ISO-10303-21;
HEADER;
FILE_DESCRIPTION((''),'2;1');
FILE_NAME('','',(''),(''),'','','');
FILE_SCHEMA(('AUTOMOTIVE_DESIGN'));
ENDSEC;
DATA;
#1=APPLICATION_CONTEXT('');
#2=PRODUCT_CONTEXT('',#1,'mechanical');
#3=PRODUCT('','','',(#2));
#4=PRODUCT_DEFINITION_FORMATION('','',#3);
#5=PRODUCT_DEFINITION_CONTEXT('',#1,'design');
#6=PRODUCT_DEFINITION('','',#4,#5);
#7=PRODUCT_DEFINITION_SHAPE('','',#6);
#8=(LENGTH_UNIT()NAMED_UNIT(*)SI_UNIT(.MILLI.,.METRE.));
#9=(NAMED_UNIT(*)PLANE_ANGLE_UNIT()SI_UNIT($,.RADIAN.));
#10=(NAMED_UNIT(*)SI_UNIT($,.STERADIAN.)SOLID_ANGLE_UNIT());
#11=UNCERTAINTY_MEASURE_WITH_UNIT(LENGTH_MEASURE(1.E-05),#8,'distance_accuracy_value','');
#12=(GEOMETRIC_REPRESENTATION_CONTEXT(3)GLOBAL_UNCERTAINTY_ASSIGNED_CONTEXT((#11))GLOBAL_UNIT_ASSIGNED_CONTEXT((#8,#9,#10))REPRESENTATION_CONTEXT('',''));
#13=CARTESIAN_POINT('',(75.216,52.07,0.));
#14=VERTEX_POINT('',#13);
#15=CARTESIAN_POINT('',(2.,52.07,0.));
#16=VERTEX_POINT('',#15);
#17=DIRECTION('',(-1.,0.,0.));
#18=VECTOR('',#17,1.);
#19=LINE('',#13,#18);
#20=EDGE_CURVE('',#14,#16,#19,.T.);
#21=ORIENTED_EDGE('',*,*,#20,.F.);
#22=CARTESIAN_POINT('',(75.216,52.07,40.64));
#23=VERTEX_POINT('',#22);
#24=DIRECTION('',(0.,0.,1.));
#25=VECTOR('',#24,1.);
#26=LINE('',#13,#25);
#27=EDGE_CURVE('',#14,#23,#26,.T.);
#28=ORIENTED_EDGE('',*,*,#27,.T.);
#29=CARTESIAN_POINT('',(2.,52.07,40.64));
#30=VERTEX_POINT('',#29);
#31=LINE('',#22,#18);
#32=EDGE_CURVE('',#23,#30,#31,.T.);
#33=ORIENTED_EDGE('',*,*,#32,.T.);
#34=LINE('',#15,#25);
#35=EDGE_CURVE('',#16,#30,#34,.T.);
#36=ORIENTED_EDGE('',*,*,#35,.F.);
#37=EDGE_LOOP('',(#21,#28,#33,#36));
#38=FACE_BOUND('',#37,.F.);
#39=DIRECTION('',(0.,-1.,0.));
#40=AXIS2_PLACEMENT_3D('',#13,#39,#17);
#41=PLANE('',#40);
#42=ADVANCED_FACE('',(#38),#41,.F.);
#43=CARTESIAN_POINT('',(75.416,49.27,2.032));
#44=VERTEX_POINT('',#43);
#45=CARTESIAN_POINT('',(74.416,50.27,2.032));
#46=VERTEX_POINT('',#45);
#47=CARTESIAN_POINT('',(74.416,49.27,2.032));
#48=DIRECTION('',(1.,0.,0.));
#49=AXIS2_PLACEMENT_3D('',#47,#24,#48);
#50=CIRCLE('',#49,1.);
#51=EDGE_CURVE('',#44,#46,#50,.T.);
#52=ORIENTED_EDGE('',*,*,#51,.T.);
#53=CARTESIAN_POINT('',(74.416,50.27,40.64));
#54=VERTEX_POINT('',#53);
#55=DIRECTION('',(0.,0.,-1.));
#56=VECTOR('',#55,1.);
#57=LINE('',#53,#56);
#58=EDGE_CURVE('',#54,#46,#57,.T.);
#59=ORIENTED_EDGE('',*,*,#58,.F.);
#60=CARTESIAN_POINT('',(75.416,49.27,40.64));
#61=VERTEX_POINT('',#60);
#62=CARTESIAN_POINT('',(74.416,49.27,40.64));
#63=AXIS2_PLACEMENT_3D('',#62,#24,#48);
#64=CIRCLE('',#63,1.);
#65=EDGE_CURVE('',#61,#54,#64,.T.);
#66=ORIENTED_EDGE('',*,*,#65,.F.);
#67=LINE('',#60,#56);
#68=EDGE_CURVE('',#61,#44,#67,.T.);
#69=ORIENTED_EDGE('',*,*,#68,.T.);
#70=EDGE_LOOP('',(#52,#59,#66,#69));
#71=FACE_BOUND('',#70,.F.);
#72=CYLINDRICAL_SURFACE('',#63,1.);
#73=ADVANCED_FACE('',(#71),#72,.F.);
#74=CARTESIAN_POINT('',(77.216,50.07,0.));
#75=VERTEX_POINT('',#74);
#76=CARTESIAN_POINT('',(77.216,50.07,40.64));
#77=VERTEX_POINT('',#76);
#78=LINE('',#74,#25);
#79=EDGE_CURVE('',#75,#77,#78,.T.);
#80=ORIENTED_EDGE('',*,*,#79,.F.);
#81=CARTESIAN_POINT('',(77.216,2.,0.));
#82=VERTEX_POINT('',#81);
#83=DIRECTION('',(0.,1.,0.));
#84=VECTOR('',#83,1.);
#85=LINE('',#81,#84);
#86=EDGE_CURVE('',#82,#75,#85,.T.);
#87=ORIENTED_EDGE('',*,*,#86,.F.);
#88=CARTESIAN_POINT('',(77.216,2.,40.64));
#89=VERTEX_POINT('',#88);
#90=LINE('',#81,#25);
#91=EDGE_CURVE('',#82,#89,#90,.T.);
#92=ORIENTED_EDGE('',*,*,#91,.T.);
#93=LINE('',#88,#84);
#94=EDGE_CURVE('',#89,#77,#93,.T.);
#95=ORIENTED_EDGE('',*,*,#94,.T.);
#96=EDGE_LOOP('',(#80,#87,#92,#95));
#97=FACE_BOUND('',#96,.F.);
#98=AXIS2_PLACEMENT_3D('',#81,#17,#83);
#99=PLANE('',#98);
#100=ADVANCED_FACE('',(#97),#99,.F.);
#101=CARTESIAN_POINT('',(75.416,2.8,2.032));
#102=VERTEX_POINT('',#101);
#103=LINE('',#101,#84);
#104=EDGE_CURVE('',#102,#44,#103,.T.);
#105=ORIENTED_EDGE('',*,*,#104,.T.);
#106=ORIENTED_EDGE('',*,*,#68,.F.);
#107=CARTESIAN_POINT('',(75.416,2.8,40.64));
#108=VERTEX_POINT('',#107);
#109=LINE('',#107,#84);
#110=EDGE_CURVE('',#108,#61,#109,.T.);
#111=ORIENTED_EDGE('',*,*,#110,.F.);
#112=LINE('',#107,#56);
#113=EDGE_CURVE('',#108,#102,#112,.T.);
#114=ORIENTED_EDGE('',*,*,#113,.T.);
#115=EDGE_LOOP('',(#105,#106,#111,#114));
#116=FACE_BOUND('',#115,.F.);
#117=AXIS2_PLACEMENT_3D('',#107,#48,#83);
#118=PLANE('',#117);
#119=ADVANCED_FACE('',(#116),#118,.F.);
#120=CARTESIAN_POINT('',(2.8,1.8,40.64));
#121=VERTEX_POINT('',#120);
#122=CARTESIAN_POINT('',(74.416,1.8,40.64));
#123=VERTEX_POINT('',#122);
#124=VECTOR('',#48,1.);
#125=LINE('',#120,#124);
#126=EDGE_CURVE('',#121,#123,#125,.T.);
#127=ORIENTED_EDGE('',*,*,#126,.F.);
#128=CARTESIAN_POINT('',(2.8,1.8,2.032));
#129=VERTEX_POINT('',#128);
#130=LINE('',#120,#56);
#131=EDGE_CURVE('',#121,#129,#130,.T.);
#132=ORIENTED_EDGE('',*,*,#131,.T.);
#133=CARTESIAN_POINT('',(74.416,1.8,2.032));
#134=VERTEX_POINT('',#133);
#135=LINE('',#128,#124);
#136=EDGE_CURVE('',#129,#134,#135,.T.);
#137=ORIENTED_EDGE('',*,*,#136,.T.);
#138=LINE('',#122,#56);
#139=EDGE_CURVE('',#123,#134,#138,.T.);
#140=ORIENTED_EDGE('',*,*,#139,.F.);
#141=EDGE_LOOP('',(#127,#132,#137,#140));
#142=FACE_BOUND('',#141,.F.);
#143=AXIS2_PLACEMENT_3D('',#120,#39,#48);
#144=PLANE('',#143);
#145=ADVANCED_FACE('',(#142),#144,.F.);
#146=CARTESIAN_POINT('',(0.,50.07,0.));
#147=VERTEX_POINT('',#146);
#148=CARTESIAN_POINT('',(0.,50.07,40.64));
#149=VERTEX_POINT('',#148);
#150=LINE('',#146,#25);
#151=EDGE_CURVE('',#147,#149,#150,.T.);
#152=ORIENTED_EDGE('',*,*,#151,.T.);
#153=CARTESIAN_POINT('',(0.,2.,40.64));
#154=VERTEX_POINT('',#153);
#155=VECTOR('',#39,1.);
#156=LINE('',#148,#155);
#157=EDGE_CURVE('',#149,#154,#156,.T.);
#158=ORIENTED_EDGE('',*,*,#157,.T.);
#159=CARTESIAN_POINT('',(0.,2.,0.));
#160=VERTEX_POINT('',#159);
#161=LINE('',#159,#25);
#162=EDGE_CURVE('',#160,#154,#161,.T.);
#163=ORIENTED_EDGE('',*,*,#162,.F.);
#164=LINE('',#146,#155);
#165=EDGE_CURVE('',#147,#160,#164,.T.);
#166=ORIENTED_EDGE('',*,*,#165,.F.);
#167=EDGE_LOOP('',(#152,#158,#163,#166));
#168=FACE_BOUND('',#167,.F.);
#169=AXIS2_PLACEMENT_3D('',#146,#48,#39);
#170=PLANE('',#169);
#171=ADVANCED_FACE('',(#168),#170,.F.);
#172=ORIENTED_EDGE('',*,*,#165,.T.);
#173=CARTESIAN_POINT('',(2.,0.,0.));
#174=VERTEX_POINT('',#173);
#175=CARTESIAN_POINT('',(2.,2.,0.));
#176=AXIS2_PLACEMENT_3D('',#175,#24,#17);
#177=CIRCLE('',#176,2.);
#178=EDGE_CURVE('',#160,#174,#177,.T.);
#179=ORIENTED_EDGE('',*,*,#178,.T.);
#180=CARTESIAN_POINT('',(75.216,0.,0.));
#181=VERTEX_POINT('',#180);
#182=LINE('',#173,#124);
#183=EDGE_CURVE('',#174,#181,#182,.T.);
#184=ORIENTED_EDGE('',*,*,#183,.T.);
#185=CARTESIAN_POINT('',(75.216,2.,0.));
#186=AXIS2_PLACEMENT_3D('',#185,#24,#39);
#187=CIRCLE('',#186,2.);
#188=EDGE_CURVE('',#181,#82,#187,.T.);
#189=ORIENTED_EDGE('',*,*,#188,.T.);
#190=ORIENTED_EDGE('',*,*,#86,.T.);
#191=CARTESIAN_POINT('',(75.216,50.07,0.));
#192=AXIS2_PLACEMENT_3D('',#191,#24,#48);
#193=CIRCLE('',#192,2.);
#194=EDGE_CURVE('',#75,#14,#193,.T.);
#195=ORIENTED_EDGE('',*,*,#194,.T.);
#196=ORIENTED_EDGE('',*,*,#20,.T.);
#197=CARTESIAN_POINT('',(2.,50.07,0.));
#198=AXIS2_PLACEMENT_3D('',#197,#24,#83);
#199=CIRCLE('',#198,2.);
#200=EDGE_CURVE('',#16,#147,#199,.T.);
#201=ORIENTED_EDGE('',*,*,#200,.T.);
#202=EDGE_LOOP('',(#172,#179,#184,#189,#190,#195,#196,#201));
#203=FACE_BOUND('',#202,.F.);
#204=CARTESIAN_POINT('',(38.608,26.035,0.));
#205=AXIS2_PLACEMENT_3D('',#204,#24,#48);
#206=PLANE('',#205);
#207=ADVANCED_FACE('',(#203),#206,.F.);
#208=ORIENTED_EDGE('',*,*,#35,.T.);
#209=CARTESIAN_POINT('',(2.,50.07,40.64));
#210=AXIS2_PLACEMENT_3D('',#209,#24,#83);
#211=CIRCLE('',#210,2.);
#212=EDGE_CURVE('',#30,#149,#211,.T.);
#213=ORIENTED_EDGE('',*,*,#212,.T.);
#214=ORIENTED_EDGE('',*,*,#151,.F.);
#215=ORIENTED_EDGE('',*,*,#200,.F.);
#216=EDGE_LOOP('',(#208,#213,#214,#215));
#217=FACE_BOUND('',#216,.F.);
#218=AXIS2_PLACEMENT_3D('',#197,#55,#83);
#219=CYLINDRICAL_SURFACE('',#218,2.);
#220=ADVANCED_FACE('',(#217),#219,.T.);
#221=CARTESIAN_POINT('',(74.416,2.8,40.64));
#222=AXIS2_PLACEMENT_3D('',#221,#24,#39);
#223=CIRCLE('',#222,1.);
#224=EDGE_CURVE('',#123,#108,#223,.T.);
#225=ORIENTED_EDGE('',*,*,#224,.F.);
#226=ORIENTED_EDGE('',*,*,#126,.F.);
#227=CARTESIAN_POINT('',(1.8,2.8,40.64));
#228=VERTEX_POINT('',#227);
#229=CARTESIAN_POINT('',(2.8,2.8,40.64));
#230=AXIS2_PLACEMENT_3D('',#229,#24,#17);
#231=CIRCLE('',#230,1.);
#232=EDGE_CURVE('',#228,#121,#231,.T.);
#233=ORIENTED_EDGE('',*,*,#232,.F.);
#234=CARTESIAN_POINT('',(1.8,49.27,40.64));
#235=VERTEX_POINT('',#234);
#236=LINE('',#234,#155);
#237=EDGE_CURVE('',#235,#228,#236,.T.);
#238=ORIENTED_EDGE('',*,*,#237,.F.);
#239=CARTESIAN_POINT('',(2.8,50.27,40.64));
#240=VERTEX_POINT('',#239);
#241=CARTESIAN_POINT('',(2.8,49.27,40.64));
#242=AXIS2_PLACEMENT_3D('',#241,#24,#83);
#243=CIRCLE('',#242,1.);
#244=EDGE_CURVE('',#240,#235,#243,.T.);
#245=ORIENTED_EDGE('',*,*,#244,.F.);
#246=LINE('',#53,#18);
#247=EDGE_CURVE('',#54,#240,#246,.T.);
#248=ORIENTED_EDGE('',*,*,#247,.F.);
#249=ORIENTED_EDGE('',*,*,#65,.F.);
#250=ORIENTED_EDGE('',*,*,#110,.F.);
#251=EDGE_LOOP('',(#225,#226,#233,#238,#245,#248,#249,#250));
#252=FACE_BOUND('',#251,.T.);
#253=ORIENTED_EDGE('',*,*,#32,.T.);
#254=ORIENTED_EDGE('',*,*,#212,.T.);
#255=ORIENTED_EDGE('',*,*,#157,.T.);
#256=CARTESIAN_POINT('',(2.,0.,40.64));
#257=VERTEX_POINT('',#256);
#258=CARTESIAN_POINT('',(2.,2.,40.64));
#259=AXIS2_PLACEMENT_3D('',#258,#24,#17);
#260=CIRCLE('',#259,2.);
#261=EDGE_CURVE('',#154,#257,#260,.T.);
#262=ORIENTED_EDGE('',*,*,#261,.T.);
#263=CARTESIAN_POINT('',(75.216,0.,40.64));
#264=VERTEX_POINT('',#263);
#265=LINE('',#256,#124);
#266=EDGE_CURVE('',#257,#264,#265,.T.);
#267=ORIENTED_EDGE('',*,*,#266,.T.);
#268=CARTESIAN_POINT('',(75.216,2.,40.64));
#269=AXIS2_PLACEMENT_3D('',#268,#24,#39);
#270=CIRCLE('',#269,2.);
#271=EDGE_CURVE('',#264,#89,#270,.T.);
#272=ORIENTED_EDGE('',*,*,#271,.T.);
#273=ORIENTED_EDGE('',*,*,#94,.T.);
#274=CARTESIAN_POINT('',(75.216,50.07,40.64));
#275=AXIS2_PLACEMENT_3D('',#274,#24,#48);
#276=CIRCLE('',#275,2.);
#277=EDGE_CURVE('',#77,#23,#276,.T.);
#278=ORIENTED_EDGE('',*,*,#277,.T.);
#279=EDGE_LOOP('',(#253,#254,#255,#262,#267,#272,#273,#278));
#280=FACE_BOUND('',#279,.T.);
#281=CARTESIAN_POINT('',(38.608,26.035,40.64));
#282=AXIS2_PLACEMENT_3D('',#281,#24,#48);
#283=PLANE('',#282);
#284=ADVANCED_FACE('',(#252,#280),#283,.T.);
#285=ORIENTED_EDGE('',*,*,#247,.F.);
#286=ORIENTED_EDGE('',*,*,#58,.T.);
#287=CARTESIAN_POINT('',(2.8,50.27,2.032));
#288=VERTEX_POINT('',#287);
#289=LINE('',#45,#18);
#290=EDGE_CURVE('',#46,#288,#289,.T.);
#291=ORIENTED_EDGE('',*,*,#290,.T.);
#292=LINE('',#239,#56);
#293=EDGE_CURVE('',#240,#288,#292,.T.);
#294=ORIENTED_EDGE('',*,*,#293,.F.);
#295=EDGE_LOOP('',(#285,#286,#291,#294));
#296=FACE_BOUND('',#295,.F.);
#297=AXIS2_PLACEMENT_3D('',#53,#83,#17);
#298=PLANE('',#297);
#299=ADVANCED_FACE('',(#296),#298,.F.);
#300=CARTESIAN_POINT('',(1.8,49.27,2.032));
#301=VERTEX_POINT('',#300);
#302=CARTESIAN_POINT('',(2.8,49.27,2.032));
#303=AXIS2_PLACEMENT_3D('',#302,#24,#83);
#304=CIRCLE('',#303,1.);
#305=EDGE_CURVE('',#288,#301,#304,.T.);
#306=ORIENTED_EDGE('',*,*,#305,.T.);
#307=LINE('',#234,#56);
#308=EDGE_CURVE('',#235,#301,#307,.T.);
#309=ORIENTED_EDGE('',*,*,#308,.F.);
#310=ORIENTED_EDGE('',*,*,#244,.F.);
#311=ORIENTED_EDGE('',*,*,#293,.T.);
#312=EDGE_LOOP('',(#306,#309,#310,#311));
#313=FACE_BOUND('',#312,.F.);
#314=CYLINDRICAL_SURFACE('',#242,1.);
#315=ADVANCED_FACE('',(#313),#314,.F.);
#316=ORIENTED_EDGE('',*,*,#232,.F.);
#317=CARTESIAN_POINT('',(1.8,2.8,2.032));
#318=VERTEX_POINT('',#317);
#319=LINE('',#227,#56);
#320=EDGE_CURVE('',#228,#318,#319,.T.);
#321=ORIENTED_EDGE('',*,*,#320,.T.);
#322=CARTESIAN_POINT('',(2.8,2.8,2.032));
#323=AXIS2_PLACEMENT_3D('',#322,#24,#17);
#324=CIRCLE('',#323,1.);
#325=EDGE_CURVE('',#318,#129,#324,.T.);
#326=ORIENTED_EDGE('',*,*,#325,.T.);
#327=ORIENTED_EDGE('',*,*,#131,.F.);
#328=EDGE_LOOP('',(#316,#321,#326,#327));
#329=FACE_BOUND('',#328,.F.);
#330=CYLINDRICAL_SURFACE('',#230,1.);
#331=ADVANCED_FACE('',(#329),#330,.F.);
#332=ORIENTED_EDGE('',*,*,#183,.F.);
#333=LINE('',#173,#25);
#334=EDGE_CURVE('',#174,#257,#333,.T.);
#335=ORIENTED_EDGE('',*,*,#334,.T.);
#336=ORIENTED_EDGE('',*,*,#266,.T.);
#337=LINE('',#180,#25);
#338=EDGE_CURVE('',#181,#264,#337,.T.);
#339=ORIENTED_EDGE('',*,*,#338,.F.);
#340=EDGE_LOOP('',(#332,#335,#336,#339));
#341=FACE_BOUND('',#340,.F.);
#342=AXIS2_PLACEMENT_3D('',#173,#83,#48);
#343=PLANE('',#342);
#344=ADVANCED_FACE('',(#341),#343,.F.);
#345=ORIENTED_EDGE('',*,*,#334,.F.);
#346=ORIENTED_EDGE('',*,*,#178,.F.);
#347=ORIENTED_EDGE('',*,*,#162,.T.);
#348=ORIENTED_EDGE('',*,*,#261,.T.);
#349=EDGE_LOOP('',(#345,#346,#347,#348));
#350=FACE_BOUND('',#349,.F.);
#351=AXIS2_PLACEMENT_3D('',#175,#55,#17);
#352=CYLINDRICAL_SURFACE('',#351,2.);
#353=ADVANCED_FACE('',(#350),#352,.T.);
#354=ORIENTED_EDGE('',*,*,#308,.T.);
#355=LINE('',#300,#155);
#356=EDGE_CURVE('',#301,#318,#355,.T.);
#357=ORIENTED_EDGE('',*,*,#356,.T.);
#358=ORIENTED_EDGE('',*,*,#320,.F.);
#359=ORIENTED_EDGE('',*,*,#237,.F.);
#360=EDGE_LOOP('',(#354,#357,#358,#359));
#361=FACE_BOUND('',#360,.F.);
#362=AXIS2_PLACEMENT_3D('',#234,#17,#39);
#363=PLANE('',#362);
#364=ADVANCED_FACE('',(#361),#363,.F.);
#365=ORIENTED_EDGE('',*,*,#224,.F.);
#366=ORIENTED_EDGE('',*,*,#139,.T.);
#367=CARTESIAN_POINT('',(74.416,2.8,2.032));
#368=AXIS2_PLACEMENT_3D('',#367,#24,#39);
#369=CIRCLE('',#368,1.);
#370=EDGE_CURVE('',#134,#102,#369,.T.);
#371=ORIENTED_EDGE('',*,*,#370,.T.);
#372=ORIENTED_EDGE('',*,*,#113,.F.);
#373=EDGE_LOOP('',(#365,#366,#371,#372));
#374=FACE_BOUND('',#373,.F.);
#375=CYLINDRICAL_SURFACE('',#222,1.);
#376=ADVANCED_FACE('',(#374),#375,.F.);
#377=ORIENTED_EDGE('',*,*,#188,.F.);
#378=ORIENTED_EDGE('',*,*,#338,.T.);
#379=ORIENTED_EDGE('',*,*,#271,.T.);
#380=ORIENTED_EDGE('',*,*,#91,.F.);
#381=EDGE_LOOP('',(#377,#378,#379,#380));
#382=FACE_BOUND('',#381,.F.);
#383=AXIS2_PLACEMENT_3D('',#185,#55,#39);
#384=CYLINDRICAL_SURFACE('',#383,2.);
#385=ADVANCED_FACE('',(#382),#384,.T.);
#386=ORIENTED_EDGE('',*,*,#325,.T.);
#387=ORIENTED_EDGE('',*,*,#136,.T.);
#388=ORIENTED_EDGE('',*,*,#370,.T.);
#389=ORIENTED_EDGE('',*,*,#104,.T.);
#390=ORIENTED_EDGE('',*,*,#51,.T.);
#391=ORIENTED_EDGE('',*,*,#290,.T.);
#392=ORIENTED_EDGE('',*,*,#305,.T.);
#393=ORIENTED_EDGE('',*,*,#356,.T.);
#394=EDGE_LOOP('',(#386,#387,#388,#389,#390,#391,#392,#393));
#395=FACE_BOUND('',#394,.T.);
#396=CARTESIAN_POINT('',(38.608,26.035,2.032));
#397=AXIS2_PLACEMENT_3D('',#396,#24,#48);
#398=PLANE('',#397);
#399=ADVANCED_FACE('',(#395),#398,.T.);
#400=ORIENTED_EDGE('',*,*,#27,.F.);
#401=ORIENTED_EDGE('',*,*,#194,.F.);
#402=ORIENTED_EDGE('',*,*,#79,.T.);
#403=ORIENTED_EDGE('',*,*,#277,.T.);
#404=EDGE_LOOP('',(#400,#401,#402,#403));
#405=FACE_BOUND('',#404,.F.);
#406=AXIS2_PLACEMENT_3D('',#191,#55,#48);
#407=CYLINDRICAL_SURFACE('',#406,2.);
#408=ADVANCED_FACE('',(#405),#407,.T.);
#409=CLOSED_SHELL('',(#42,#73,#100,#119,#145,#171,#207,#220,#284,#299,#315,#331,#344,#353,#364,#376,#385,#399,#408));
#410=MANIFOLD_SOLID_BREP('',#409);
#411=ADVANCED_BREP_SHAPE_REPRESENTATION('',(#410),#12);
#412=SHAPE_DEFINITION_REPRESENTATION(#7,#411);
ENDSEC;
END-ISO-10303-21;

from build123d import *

# Parameters (mm, degrees)
F1_DEPTH = 40.64
F3_DEPTH = 38.608


# Not quite as in the source:
# - a feature names something its author has since deleted; it is built from what else it names


with BuildPart() as f1:
    # F0 (on Top) → F1 (new body)
    with BuildSketch(Plane.XY):
        with BuildLine():
            ThreePointArc((0, 2), (0.5857864376, 0.5857864376), (2, 0))
            Line((2, 0), (75.216, 0))
            ThreePointArc((75.216, 0), (76.6302135624, 0.5857864376), (77.216, 2))
            Line((77.216, 2), (77.216, 50.07))
            ThreePointArc((77.216, 50.07), (76.6302135624, 51.4842135624), (75.216, 52.07))
            Line((75.216, 52.07), (2, 52.07))
            ThreePointArc((2, 52.07), (0.5857864376, 51.4842135624), (0, 50.07))
            Line((0, 50.07), (0, 2))
        make_face()
    extrude(amount=F1_DEPTH)

    # F2 (on face) → F3 (cut)
    with BuildSketch(Plane.XY.offset(40.64)):
        with BuildLine():
            Line((74.416, 50.27), (2.8, 50.27))
            ThreePointArc((2.8, 50.27), (2.0928932188, 49.9771067812), (1.8, 49.27))
            Line((1.8, 49.27), (1.8, 2.8))
            ThreePointArc((1.8, 2.8), (2.0928932188, 2.0928932188), (2.8, 1.8))
            Line((2.8, 1.8), (74.416, 1.8))
            ThreePointArc((74.416, 1.8), (75.1231067812, 2.0928932188), (75.416, 2.8))
            Line((75.416, 2.8), (75.416, 49.27))
            ThreePointArc((75.416, 49.27), (75.1231067812, 49.9771067812), (74.416, 50.27))
        make_face()
    extrude(amount=-F3_DEPTH, mode=Mode.SUBTRACT)


solid = f1.part
